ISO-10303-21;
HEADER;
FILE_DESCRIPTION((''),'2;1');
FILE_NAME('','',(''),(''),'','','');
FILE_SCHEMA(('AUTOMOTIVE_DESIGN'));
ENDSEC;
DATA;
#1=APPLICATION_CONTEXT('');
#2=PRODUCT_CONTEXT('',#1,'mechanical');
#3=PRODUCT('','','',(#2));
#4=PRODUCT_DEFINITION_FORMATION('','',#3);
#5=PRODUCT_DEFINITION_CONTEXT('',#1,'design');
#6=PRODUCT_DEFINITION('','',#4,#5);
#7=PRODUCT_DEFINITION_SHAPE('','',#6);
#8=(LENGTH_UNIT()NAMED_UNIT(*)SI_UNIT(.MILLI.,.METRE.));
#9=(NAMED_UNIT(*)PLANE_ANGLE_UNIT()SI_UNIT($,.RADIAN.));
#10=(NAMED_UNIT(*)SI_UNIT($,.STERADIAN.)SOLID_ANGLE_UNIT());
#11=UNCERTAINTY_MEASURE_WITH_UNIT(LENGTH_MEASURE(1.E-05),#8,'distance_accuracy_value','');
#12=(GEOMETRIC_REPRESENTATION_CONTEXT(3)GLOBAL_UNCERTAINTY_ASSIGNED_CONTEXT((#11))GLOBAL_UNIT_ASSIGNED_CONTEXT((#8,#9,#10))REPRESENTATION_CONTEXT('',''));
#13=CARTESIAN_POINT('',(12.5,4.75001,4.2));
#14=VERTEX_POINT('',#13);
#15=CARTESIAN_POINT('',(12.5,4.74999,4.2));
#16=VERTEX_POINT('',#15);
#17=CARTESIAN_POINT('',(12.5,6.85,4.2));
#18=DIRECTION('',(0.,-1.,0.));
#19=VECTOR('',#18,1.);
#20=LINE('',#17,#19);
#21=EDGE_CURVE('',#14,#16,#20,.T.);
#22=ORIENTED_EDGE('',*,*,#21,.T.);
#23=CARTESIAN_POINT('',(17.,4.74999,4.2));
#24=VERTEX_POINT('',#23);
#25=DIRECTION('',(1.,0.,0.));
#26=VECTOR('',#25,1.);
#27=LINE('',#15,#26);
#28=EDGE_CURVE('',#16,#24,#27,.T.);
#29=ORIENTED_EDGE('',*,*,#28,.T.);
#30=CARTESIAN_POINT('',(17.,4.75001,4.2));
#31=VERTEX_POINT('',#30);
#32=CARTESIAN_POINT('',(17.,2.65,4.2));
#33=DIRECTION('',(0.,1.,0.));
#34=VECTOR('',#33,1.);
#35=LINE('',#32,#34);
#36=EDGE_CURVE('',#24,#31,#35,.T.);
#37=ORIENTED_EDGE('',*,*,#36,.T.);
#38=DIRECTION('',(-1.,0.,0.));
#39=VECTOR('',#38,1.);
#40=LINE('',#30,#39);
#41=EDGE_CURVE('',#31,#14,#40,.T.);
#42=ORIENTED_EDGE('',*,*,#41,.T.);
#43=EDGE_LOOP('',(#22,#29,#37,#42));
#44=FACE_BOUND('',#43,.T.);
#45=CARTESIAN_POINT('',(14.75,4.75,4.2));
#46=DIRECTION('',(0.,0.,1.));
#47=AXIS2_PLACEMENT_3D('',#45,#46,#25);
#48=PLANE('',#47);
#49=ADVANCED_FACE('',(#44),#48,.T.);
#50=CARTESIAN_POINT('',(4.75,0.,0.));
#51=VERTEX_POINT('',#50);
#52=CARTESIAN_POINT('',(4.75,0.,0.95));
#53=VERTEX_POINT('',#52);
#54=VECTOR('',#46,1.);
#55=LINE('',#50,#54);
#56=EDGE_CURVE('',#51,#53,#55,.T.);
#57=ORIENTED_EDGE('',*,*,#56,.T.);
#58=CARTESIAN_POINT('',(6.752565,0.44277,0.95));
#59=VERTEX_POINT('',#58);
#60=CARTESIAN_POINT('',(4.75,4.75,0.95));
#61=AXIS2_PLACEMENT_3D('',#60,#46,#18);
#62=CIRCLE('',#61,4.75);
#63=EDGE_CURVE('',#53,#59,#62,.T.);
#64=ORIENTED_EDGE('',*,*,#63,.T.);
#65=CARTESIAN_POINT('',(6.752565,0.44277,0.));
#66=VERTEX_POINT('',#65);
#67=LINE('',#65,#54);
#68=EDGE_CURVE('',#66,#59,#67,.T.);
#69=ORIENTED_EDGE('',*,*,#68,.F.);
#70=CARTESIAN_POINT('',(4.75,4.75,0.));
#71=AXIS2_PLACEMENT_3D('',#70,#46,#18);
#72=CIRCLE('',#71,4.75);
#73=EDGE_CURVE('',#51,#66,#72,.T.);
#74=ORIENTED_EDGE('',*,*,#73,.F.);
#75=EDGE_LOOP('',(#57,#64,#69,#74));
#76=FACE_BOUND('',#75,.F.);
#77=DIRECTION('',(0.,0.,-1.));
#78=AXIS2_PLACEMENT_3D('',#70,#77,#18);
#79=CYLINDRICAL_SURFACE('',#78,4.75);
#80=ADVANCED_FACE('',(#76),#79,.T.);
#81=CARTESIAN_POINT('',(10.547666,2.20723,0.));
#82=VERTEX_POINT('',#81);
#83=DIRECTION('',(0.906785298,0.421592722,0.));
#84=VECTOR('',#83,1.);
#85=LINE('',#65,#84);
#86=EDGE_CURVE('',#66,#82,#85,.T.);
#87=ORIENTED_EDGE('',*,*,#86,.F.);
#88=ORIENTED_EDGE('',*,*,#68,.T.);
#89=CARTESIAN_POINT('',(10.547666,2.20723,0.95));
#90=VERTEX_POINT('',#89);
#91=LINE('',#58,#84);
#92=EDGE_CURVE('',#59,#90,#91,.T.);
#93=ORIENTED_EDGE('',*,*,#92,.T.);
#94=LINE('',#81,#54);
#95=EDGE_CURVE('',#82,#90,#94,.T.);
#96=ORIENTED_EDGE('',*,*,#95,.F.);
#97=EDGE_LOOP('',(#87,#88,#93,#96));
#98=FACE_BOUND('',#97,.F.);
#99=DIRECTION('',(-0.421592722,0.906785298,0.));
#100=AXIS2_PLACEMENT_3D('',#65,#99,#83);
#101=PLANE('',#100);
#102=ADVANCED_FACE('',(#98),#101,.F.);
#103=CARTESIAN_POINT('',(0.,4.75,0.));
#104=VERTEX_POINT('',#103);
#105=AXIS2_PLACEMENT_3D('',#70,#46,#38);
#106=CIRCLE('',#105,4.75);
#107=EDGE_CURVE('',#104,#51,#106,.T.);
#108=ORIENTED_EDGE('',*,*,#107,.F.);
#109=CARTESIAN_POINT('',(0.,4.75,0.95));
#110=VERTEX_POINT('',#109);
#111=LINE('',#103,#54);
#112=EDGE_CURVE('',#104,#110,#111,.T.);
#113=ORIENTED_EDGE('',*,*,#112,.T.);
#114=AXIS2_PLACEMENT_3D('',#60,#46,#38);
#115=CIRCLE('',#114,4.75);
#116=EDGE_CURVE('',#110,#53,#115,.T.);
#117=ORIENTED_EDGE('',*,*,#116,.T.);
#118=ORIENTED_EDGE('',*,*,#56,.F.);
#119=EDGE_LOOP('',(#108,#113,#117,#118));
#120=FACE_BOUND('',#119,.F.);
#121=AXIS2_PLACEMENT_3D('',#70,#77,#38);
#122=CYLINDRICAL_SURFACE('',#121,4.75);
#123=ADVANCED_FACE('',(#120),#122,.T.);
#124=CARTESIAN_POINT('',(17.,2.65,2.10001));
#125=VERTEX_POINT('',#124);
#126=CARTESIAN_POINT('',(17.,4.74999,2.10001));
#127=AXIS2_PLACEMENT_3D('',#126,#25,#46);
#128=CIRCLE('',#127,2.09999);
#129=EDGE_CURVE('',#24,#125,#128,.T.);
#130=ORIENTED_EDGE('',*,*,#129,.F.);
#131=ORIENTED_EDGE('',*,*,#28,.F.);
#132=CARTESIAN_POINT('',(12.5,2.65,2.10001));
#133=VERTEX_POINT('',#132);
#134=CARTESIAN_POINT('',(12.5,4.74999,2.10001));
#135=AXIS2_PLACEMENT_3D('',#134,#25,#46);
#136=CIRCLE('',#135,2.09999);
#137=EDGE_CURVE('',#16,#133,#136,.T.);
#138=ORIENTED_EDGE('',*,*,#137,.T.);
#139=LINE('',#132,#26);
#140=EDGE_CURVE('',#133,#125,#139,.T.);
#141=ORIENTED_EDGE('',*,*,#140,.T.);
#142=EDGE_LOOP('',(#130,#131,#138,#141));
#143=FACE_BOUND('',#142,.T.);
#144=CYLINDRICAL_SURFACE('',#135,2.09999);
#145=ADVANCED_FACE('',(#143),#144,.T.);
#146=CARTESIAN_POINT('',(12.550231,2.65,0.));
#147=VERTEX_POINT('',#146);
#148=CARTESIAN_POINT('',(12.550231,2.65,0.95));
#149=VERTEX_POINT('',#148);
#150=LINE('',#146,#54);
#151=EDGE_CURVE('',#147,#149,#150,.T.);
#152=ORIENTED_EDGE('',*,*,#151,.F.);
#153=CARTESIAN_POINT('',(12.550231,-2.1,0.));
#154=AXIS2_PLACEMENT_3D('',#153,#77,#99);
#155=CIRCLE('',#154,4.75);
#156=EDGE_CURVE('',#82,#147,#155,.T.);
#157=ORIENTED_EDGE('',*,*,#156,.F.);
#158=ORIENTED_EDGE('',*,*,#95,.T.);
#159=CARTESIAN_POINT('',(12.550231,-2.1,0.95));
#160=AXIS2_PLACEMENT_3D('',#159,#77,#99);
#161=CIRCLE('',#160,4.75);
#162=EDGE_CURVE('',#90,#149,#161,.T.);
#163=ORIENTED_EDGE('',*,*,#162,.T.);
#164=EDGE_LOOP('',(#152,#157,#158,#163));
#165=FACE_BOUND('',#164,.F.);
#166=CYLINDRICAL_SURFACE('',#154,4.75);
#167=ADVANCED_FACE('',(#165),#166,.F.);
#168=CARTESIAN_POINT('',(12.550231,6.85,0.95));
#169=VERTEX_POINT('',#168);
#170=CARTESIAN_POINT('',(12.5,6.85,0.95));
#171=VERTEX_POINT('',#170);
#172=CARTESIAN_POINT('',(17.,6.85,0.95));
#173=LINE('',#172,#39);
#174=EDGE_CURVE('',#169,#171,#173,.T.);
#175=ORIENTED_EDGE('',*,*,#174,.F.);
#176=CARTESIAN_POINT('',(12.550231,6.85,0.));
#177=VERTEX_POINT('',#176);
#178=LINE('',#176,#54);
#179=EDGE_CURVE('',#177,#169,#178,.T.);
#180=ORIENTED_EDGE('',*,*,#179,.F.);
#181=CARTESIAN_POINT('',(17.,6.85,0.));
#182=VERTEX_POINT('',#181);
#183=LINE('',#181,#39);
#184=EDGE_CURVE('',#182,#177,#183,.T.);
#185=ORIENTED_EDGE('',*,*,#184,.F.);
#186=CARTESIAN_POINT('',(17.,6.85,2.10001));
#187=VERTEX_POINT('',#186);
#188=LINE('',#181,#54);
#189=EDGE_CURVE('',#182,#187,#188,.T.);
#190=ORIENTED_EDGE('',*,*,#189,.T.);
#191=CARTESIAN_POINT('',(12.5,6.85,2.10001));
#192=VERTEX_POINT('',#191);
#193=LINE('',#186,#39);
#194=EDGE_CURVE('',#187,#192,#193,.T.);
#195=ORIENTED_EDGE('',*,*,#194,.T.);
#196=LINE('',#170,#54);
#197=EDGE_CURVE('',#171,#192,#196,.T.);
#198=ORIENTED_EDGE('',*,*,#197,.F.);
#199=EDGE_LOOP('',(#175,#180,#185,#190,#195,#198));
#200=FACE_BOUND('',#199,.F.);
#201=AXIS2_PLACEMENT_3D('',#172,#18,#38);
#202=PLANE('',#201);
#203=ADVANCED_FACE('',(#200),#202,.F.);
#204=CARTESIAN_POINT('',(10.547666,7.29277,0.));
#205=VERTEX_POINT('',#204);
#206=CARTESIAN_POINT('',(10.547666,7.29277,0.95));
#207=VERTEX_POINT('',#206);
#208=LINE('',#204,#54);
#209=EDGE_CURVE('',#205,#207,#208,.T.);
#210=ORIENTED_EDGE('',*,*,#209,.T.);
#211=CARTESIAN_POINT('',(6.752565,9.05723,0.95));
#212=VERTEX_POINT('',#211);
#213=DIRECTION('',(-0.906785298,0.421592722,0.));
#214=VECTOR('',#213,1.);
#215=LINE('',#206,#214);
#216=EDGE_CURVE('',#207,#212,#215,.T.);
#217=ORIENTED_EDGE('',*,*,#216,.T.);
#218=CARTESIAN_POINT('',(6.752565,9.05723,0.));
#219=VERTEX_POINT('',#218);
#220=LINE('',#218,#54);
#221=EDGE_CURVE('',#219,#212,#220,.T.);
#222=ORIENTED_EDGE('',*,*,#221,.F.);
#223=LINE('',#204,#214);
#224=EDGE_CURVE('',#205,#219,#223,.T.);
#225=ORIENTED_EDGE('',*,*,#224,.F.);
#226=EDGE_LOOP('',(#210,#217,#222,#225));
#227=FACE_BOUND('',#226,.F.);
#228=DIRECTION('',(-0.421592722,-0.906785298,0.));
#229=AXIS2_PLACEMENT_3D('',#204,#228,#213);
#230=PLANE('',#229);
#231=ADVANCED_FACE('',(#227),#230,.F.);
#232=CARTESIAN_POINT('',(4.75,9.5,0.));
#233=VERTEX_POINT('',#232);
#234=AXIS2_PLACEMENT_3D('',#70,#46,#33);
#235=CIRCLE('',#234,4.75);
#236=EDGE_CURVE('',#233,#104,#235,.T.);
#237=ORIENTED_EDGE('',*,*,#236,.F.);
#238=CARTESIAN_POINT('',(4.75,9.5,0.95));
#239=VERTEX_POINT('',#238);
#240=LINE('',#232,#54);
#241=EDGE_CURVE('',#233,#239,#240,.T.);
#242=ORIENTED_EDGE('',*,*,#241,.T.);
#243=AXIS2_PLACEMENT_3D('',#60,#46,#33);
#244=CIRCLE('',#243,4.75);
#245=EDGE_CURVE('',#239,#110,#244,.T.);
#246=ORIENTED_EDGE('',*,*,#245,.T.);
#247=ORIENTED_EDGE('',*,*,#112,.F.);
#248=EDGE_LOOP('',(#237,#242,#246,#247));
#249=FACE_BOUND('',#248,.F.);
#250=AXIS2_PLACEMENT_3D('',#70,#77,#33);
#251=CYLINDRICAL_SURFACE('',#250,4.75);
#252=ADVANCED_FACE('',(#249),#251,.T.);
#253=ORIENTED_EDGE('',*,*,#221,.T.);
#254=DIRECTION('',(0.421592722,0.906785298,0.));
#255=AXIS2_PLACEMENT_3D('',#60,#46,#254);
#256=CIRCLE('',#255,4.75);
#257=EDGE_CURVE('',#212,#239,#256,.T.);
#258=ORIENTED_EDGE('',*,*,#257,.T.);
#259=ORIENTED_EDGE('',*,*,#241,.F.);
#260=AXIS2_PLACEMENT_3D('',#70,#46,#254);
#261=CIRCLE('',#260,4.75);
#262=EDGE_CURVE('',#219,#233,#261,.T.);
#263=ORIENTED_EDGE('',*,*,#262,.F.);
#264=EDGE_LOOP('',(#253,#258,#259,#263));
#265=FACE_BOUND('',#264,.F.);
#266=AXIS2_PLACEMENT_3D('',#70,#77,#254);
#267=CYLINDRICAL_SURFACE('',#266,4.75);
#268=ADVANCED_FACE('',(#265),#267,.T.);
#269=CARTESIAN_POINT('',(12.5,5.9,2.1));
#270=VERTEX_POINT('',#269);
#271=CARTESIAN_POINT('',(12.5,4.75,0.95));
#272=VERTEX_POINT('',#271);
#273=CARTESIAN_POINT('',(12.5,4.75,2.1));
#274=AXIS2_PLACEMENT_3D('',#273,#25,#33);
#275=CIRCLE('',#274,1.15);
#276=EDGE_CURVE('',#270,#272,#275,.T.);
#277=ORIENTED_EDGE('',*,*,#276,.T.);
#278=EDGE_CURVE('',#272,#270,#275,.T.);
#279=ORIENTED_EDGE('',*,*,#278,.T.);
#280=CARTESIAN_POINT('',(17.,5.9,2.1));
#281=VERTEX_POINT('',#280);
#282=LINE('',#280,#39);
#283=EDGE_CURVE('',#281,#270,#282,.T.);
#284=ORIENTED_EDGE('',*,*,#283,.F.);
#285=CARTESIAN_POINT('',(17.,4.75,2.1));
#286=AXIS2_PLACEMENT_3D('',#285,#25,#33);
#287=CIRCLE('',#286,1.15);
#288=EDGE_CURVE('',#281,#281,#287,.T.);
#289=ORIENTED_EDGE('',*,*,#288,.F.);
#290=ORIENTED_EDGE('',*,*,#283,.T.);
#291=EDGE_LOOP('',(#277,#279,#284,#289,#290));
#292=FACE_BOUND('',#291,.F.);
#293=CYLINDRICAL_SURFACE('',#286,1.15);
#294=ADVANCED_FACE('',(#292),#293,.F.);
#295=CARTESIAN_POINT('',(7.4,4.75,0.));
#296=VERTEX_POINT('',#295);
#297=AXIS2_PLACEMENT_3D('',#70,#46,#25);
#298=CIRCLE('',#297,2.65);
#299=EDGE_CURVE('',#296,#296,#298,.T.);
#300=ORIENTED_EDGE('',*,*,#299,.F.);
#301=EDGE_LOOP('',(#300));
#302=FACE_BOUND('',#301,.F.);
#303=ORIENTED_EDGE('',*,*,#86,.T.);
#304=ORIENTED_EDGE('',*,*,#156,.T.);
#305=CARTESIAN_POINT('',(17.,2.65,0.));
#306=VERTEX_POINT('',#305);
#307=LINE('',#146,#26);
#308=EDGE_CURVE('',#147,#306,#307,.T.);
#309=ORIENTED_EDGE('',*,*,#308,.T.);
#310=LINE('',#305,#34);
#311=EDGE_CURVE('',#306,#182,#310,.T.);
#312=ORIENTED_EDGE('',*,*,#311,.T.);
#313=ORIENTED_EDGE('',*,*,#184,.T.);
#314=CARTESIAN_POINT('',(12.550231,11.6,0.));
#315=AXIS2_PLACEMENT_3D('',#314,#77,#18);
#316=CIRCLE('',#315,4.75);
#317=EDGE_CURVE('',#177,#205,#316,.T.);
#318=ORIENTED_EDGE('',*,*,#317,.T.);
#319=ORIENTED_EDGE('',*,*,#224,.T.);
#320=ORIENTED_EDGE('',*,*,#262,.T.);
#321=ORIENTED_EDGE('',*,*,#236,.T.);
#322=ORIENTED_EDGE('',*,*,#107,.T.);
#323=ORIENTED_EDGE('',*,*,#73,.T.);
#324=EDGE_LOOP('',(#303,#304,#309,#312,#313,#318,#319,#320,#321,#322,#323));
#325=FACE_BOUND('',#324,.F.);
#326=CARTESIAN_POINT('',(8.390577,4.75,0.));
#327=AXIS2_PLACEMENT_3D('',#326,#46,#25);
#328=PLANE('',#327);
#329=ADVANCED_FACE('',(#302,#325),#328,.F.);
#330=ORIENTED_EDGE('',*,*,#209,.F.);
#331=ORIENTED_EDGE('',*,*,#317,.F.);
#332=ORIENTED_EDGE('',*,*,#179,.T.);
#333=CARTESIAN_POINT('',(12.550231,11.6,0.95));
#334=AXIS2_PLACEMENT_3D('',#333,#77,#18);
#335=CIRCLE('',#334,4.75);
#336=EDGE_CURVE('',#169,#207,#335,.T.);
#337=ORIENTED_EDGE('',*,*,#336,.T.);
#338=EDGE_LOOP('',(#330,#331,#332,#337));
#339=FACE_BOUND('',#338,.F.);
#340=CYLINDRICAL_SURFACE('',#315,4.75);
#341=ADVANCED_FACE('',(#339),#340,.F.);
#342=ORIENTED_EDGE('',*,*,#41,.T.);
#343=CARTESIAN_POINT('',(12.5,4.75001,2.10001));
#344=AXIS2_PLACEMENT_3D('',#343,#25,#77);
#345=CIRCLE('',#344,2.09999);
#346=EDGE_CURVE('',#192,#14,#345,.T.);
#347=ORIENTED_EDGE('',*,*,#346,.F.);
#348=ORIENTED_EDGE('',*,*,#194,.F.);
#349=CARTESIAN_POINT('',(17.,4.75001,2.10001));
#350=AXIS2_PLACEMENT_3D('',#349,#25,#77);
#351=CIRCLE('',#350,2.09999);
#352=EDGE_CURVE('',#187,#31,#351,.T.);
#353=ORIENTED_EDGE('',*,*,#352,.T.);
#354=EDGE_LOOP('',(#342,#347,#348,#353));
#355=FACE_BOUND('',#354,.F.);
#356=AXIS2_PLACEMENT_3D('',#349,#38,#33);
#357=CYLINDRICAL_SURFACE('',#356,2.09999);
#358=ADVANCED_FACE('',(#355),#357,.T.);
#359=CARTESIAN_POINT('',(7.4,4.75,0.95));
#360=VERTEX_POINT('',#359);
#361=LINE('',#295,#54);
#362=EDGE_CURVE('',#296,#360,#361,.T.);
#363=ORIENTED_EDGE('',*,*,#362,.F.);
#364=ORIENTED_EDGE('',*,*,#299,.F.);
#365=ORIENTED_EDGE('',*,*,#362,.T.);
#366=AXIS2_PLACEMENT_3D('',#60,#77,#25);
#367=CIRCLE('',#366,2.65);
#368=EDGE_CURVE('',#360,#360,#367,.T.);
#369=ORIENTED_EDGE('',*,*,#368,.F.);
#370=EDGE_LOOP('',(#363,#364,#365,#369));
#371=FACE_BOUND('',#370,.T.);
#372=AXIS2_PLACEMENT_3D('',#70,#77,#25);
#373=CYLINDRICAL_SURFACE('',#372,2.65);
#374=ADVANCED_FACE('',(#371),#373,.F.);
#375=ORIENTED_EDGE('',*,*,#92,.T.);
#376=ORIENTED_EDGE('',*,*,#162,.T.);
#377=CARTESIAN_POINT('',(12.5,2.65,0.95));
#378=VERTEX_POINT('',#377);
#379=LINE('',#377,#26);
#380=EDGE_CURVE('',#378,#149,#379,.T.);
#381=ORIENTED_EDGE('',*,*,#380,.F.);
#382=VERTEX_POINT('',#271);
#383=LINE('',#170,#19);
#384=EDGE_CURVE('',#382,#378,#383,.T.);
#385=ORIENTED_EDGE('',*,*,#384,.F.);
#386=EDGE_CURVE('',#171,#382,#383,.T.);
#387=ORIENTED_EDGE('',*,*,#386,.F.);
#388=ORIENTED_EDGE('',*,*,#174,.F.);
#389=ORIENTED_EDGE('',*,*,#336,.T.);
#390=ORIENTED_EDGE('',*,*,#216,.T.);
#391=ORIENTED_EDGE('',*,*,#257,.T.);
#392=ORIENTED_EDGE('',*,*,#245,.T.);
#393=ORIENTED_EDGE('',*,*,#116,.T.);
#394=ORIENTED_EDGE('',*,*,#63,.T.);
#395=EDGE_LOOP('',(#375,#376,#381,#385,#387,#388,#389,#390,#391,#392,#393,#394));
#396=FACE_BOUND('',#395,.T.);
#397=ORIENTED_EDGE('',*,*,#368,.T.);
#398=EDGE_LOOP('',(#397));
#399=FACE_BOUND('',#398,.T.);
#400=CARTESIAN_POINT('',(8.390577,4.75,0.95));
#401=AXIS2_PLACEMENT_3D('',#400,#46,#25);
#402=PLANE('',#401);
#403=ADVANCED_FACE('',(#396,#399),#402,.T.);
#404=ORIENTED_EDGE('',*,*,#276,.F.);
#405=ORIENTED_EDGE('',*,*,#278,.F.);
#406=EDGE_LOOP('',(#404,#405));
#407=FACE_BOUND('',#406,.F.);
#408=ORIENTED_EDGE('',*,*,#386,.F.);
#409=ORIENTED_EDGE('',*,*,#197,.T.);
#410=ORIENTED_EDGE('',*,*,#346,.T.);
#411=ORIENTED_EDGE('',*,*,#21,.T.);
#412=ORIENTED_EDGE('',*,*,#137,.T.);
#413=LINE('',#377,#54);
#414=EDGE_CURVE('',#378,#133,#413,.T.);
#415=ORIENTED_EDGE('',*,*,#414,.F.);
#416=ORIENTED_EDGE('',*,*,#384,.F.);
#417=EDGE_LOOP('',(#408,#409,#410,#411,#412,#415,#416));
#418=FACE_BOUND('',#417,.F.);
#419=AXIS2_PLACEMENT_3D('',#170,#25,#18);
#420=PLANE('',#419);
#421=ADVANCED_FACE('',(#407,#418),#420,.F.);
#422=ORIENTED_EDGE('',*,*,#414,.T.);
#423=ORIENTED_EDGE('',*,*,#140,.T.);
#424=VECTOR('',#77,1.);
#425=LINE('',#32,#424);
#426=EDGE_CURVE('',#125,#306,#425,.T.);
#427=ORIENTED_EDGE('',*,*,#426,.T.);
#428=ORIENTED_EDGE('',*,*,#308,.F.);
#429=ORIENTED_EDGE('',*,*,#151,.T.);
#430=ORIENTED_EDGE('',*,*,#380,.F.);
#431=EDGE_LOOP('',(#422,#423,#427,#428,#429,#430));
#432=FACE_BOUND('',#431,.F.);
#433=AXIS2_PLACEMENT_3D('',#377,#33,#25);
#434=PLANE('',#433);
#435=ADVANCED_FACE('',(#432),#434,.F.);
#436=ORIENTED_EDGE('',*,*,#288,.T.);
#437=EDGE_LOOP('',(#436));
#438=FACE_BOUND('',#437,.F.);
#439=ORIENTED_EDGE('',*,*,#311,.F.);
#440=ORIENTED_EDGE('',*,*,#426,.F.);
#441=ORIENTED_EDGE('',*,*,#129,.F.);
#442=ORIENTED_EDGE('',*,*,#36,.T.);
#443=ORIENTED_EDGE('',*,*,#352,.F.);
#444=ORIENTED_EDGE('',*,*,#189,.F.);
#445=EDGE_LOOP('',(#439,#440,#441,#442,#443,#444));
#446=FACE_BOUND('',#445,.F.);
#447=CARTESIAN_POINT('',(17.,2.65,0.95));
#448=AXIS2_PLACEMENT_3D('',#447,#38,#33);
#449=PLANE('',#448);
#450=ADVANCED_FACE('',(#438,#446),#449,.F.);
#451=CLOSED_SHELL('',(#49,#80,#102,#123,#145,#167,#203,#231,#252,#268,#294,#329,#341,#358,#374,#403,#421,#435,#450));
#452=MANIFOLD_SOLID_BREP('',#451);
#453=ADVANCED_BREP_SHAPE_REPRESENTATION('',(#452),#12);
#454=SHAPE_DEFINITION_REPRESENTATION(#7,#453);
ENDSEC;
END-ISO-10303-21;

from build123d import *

# Parameters (mm, degrees)
F0_R     = 2.65
F1_DEPTH = 0.95
F3_DEPTH = 3.25
F4_R     = 2.09999
F5_R     = 1.15
F6_DEPTH = 25


# Not quite as in the source:
# - a fillet or chamfer is up to 0.001 mm smaller than in the source, because OpenCascade refuses the exact size


with BuildPart() as f1:
    # F0 (on Top) → F1 (new body)
    with BuildSketch(Plane.XY):
        with BuildLine():
            Line((12.5502312096, 2.65), (17, 2.65))
            Line((17, 2.65), (17, 6.85))
            Line((17, 6.85), (12.5502312096, 6.85))
            ThreePointArc((12.5502312096, 6.85), (11.5247662629, 6.9620131907), (10.5476657796, 7.2927698345))
            Line((10.5476657796, 7.2927698345), (6.75256543, 9.0572301655))
            ThreePointArc((6.75256543, 9.0572301655), (5.7754649467, 9.3879868093), (4.75, 9.5))
            ThreePointArc((4.75, 9.5), (1.3912427894, 8.1087572106), (0, 4.75))
            ThreePointArc((0, 4.75), (1.3912427894, 1.3912427894), (4.75, 0))
            ThreePointArc((4.75, 0), (5.7754649467, 0.1120131907), (6.75256543, 0.4427698345))
            Line((6.75256543, 0.4427698345), (10.5476657796, 2.2072301655))
            ThreePointArc((10.5476657796, 2.2072301655), (11.5247662629, 2.5379868093), (12.5502312096, 2.65))
        make_face()
        with Locations((4.75, 4.75)):
            Circle(F0_R, mode=Mode.SUBTRACT)
    extrude(amount=F1_DEPTH)

    # F2 (on face) → F3 (join)
    with BuildSketch(Plane.XY.offset(0.95)):
        Polygon((17, 2.65), (17, 6.85), (12.5502312096, 6.85), (12.5, 6.85), (12.5, 2.65), (12.5502312096, 2.65), align=None)
    extrude(amount=F3_DEPTH)

    # F4 (radius 2.1 in the source; OpenCascade refuses exactly that, so slightly less here)
    f4_edges = [f1.edges().sort_by_distance(p)[0] for p in [
        (14.75, 6.85, 4.2),
        (14.75, 2.65, 4.2),
    ]]
    fillet(f4_edges, radius=F4_R)

    # F5 (on face) → F6 (cut)
    with BuildSketch(Plane.YZ.offset(17)):
        with Locations((4.75, 2.1)):
            Circle(F5_R)
    extrude(amount=-F6_DEPTH, mode=Mode.SUBTRACT)


solid = f1.part
